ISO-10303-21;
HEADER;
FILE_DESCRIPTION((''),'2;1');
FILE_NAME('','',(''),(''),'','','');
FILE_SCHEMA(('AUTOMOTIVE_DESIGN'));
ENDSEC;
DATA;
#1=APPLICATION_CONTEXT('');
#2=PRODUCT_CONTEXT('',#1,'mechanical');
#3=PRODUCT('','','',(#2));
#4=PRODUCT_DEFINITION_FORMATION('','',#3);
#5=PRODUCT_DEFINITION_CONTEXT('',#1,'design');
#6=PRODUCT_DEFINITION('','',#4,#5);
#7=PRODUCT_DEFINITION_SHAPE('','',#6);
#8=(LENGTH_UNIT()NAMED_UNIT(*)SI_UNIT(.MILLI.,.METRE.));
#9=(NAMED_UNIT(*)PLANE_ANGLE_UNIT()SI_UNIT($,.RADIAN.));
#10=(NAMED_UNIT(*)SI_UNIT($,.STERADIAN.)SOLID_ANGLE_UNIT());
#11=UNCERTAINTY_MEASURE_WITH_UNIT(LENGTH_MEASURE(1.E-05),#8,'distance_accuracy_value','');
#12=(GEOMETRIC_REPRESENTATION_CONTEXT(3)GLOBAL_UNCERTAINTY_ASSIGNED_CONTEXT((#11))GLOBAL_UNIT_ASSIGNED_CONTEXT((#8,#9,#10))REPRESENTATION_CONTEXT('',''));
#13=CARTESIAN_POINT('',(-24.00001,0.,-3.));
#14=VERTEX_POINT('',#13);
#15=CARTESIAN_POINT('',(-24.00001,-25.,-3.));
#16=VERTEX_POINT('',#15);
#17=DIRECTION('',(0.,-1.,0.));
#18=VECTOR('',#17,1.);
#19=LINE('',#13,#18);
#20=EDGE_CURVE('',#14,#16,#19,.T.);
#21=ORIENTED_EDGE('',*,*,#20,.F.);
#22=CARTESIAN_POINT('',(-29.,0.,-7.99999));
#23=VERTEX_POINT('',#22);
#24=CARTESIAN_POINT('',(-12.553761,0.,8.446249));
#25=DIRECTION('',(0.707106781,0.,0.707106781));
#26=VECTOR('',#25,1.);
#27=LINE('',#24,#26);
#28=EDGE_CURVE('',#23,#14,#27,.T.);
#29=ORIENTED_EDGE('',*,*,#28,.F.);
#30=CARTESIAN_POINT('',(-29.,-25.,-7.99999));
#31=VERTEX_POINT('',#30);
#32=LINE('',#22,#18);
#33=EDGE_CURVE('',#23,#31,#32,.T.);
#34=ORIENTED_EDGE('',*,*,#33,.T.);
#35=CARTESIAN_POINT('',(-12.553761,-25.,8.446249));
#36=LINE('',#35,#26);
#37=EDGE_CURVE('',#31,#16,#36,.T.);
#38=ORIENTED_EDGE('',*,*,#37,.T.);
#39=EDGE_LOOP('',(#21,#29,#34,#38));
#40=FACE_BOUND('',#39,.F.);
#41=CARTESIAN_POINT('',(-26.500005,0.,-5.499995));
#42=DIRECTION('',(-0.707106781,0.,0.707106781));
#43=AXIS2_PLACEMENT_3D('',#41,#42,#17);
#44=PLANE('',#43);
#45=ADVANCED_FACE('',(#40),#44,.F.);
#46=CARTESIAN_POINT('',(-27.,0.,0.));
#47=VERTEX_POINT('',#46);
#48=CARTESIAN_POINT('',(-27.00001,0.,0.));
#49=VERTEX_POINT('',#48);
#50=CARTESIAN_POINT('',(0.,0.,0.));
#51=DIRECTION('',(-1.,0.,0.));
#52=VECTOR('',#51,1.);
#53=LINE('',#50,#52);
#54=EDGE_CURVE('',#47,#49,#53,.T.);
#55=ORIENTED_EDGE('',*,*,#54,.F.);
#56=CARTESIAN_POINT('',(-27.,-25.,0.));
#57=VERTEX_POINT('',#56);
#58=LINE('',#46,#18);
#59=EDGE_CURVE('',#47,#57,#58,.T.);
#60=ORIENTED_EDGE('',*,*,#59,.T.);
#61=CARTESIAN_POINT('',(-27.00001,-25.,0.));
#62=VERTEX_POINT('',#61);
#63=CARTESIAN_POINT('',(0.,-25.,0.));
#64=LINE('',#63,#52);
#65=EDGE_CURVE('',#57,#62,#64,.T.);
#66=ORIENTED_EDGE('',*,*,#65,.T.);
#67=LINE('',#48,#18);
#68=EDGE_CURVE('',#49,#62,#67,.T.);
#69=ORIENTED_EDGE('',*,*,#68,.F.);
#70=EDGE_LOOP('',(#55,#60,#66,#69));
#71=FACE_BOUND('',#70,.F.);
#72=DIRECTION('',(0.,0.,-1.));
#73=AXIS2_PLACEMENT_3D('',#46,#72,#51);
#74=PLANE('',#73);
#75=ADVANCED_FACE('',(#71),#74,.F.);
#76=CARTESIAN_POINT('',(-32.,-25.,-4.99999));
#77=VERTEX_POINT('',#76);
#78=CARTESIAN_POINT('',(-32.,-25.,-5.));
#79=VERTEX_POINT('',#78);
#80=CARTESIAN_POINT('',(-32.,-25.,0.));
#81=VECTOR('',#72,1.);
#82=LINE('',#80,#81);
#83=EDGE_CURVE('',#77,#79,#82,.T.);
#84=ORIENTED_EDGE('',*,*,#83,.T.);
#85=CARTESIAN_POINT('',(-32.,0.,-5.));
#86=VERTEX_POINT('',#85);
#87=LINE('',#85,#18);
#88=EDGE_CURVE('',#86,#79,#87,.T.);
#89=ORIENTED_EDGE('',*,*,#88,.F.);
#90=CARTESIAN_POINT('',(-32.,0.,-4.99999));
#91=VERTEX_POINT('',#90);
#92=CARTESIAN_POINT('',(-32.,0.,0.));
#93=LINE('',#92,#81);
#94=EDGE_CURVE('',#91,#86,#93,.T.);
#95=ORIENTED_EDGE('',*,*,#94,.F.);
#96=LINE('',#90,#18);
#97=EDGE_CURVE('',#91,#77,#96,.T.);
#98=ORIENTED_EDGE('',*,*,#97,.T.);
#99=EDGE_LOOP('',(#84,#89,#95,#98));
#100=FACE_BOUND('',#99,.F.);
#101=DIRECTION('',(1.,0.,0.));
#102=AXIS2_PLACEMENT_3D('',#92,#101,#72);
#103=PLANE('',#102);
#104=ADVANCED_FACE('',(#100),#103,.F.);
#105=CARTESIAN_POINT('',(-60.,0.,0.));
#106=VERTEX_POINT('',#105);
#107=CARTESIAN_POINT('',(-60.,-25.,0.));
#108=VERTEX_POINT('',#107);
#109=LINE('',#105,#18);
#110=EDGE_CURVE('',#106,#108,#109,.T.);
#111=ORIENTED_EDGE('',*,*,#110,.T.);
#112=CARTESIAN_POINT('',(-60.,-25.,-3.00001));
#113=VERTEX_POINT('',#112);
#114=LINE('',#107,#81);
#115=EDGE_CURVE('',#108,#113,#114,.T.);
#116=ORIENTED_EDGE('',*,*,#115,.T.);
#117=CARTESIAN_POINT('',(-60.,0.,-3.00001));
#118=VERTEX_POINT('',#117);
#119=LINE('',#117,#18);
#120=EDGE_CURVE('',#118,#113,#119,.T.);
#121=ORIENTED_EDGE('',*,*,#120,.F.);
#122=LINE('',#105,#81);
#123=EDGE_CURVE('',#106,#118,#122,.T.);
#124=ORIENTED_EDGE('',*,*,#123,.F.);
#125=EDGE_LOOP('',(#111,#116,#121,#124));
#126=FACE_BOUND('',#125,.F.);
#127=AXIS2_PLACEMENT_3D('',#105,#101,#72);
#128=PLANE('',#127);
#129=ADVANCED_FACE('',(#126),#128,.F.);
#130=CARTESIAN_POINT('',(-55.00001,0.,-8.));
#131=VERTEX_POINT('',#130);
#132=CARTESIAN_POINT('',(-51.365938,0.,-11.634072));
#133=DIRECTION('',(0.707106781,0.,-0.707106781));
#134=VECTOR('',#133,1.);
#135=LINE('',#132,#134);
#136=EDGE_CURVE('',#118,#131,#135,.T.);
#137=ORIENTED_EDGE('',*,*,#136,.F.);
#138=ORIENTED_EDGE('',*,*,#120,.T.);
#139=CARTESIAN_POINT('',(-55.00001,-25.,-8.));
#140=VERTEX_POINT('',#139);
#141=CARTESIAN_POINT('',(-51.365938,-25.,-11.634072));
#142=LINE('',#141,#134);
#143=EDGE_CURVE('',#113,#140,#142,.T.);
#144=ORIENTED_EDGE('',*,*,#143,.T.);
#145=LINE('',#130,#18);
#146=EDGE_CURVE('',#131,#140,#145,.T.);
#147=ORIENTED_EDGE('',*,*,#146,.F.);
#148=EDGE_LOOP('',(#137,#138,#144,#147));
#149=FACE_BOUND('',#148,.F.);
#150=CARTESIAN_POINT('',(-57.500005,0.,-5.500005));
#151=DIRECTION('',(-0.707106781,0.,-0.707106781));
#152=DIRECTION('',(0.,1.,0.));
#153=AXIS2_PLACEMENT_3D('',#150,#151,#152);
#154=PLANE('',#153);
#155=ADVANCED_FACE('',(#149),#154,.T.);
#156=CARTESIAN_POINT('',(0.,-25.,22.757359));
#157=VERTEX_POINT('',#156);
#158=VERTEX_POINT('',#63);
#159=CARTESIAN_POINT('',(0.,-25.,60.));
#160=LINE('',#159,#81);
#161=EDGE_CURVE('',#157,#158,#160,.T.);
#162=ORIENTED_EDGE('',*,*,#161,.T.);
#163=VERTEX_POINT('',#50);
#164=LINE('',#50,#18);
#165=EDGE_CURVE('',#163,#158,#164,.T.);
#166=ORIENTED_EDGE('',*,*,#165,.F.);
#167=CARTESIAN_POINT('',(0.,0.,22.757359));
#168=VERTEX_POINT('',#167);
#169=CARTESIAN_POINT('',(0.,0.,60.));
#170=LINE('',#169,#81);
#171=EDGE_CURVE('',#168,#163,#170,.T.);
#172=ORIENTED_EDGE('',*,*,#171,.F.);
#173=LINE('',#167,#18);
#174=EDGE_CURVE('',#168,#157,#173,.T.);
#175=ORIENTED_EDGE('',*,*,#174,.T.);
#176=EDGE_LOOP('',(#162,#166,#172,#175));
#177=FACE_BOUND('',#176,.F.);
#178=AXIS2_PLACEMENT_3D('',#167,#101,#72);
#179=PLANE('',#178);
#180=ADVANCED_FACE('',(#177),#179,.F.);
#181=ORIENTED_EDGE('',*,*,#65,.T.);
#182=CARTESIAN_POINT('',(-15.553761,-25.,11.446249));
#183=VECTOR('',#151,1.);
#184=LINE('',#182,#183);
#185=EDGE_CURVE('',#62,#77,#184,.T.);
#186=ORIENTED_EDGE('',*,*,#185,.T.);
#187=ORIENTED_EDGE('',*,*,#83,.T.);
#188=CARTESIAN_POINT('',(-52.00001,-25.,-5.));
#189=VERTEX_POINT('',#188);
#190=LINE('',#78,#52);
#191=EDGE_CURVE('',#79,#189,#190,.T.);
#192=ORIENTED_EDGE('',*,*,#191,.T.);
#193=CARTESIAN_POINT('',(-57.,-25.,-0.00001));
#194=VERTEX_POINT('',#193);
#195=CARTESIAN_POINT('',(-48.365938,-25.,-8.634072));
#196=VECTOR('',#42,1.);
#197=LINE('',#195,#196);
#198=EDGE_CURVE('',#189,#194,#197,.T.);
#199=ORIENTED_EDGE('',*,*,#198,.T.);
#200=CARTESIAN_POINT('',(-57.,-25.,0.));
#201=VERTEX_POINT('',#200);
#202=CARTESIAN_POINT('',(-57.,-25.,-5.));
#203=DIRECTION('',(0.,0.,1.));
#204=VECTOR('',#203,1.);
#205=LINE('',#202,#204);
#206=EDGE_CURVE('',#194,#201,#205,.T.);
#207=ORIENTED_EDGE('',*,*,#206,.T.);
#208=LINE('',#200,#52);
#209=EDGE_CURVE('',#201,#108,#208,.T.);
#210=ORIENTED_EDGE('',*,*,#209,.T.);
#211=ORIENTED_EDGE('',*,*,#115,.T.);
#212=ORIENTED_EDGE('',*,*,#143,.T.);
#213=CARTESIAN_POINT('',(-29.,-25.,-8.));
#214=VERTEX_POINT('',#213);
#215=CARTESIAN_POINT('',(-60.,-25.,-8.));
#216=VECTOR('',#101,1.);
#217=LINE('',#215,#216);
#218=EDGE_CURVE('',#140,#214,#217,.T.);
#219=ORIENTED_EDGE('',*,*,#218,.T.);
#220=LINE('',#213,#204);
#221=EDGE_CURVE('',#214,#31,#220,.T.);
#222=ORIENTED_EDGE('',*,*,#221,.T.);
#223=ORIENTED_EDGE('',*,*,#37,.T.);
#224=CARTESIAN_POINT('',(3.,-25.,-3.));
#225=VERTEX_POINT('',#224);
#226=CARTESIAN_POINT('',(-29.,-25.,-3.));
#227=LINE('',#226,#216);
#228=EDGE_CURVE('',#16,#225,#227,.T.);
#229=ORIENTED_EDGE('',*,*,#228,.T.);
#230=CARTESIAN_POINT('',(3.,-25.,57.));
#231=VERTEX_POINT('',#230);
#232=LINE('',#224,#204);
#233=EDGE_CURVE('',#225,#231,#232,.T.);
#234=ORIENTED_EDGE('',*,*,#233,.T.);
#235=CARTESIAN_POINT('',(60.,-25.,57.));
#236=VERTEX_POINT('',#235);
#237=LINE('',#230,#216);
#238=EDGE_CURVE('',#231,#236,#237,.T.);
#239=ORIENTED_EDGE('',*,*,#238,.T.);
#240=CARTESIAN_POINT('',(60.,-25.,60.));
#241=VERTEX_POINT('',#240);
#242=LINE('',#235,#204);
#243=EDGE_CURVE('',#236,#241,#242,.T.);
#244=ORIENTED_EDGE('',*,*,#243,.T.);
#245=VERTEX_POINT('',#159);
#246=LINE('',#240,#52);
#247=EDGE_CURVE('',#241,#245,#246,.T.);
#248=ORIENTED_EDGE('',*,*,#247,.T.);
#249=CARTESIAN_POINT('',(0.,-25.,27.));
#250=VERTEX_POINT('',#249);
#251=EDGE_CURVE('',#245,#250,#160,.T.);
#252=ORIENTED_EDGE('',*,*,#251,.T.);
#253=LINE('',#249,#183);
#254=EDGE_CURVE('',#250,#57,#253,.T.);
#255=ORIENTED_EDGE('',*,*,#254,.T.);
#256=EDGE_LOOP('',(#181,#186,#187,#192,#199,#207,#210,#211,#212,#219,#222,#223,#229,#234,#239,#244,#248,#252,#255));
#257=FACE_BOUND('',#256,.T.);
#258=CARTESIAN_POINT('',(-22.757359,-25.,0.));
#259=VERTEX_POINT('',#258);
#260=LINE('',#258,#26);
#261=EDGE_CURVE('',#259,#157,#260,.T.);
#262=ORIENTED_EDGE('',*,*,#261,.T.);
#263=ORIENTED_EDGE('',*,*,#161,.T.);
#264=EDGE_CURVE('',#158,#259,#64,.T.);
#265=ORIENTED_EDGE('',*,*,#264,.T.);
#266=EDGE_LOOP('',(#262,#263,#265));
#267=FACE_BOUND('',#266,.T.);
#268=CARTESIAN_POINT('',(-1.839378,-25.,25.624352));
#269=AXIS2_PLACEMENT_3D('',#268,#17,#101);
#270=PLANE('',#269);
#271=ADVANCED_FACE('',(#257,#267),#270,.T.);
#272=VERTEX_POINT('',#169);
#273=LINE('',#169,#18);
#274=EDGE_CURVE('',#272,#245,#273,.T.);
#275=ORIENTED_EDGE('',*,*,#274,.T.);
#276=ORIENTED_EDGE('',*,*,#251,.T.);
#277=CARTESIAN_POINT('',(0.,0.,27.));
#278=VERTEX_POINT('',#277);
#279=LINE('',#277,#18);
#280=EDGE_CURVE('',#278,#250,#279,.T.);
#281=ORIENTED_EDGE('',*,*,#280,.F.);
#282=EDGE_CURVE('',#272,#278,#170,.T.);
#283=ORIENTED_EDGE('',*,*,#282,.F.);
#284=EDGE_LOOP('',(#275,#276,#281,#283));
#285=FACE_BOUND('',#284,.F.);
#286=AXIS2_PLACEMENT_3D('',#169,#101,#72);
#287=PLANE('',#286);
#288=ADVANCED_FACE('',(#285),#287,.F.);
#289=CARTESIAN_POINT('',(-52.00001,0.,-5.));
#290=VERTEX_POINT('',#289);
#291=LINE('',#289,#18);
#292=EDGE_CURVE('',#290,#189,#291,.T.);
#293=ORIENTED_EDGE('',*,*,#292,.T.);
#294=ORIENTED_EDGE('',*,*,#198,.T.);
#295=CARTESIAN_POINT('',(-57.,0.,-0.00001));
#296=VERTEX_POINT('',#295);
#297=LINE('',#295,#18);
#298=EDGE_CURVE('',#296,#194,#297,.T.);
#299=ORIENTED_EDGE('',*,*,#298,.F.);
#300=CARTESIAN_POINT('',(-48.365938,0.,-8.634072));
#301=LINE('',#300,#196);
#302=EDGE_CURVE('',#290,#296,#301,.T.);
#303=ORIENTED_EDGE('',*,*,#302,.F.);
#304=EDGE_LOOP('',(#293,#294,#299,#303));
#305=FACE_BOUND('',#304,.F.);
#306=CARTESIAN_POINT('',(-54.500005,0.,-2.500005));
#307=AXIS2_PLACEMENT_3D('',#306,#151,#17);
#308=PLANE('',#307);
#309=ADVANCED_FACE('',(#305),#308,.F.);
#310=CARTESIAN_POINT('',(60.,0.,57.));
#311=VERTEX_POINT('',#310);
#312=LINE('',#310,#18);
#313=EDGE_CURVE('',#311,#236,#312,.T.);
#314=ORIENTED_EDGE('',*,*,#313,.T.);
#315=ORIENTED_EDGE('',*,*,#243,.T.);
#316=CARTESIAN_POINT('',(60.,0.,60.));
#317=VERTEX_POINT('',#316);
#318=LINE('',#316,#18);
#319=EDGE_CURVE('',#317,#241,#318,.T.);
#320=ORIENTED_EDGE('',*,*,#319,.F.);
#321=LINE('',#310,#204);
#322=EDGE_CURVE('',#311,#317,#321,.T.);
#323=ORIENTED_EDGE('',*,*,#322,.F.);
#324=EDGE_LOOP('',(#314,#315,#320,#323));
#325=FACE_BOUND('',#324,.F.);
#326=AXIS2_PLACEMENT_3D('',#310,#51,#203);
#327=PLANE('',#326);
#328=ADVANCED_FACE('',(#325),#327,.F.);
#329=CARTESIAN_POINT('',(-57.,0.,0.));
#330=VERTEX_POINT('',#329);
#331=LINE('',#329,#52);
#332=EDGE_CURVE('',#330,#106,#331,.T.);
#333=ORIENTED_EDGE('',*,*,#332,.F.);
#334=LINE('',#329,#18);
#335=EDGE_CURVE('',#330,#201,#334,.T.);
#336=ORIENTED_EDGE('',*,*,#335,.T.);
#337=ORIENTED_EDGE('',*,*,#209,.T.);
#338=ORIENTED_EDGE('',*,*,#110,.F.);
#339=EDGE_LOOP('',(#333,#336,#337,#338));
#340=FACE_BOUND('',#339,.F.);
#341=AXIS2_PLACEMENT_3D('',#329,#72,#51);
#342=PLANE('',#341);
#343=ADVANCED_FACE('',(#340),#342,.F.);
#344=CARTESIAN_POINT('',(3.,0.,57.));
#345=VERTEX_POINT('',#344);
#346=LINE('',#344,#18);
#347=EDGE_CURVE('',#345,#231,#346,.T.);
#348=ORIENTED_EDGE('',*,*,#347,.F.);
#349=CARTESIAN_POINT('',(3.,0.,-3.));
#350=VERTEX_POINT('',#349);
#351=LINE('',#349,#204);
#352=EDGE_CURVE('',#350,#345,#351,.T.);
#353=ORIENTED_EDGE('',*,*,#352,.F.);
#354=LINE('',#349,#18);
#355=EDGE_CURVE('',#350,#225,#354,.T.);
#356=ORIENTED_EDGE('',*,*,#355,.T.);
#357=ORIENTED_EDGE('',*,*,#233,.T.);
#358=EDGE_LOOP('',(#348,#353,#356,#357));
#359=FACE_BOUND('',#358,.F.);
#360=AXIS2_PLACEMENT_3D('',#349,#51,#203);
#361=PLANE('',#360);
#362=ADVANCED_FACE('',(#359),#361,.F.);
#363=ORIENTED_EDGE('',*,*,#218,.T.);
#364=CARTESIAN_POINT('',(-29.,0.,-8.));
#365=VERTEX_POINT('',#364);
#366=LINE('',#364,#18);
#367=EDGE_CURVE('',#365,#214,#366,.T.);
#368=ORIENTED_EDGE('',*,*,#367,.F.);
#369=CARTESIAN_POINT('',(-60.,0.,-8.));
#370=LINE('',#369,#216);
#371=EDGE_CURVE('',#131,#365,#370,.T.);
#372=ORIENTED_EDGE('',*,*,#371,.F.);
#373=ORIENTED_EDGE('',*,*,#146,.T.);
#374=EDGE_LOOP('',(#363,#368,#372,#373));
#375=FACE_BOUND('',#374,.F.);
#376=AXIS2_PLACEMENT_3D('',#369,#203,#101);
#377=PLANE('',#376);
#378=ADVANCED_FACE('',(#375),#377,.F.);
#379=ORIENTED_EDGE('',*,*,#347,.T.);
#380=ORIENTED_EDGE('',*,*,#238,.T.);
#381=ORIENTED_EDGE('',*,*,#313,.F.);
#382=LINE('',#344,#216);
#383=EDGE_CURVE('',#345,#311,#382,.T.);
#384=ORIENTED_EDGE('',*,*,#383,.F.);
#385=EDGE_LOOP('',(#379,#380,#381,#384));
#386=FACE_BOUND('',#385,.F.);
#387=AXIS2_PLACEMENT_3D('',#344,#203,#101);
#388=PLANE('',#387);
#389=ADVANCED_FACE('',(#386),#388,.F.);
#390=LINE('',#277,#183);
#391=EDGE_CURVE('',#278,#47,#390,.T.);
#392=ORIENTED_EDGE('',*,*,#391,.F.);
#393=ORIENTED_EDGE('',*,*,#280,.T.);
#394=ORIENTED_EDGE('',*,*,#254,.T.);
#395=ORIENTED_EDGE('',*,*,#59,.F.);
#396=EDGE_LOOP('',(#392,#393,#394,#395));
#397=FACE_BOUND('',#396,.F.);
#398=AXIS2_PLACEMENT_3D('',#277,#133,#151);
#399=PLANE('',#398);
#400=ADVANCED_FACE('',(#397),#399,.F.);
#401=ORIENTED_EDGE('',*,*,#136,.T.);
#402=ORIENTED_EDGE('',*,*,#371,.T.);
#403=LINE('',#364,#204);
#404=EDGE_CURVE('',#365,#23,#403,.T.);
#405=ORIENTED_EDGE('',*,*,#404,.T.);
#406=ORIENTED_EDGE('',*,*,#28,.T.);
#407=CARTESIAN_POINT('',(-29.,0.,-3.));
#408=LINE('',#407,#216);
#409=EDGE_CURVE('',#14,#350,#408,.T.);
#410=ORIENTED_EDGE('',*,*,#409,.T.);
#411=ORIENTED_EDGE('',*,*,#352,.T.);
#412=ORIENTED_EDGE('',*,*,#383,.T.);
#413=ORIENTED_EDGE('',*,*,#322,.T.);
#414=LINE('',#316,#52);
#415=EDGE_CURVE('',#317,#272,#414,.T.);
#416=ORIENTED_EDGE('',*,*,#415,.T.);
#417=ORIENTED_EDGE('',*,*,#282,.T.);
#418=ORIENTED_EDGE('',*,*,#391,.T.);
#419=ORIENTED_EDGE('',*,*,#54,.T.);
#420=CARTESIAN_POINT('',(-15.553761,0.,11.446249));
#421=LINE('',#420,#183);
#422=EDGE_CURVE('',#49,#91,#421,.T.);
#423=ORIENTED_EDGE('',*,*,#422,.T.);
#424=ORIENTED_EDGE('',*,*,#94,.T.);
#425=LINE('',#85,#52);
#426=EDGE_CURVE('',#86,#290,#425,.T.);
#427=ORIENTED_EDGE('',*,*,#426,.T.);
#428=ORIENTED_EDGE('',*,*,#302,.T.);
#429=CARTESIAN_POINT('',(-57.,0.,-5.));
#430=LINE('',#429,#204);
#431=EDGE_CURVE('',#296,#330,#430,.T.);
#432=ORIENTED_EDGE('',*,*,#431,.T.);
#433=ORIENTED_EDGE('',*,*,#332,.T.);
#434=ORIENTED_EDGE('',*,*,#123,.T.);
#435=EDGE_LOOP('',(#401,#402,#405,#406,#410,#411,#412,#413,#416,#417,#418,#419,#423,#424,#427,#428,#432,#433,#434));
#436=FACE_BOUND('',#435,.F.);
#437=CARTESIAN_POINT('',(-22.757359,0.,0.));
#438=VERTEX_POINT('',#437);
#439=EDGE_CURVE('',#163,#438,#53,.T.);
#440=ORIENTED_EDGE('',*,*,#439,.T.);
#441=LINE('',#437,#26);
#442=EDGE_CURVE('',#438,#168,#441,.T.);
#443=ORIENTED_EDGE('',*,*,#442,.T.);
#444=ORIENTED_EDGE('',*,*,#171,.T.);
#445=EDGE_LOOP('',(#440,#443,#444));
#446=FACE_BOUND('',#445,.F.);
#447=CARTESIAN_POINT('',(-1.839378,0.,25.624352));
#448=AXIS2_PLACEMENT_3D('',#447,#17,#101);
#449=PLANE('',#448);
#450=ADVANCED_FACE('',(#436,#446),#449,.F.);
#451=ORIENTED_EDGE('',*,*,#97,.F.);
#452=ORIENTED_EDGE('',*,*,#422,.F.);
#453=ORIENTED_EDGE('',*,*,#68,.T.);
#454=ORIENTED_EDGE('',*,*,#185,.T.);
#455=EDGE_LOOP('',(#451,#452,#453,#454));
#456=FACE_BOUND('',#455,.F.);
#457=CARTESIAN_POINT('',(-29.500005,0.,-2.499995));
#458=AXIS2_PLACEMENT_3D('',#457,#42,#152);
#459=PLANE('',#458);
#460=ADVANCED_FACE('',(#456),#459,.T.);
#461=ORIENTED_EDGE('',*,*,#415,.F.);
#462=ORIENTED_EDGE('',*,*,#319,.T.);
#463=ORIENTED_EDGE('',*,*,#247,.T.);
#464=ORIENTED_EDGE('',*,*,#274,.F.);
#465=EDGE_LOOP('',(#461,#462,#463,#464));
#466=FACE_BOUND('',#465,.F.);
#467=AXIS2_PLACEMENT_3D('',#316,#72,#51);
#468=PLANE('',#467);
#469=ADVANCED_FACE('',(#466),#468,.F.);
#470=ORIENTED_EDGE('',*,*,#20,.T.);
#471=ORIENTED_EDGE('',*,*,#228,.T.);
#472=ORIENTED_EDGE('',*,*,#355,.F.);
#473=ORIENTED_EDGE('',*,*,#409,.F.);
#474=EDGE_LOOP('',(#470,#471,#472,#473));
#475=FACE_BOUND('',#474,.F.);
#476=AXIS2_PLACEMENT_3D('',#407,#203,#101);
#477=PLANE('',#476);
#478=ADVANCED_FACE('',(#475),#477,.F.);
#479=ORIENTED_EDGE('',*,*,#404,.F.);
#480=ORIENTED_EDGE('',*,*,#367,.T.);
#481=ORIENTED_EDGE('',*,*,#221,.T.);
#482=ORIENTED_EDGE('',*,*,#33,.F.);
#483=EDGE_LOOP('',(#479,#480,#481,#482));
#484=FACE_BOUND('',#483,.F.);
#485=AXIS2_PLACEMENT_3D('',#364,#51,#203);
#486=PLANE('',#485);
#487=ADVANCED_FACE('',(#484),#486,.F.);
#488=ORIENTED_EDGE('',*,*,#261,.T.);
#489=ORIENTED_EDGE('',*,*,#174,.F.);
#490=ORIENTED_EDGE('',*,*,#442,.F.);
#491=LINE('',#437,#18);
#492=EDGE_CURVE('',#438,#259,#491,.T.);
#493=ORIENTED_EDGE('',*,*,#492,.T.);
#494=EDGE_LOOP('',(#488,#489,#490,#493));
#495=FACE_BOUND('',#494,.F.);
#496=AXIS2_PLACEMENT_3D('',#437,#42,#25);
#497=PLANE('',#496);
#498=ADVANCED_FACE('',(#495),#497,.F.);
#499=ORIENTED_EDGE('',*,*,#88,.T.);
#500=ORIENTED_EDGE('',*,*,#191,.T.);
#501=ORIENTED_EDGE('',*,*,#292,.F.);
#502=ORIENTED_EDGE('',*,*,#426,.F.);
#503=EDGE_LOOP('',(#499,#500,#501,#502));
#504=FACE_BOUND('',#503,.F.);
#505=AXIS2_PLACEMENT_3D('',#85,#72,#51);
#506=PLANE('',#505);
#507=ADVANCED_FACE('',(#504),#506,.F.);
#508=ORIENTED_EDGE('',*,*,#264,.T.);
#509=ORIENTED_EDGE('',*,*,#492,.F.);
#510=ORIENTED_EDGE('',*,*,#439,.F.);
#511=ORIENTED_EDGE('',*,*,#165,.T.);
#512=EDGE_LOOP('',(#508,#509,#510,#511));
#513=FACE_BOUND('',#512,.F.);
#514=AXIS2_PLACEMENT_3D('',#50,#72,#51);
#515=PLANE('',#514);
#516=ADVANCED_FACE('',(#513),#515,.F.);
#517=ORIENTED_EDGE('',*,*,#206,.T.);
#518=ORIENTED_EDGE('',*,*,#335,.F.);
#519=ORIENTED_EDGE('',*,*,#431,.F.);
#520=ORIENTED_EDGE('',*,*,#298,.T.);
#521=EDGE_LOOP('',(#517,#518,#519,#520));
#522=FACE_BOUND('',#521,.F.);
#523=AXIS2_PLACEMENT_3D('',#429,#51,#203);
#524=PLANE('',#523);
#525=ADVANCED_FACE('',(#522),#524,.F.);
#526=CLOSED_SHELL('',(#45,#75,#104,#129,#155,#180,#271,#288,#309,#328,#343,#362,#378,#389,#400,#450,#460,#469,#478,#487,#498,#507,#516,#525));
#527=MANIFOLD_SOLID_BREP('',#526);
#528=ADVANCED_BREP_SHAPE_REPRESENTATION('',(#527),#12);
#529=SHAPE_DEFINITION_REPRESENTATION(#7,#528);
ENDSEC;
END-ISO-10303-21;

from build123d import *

# Parameters (mm, degrees)
F1_DEPTH = 25
F2_SIZE  = 4.99999


# Not quite as in the source:
# - a fillet or chamfer is up to 0.001 mm smaller than in the source, because OpenCascade refuses the exact size


with BuildPart() as f1:
    # F0 (on Front) → F1 (new body)
    with BuildSketch(Plane.XZ):
        Polygon((0, 22.7573593129), (0, 0), (-22.7573593129, 0), (-27, 0), (-32, 0), (-32, -5), (-57, -5), (-57, 0), (-60, 0), (-60, -8), (-29, -8), (-29, -3), (0, -3), (3, -3), (3, 57), (60, 57), (60, 60), (0, 60), (0, 27), align=None)
        Polygon((-22.7573593129, 0), (0, 22.7573593129), (0, 27), (-27, 0), align=None)
    extrude(amount=F1_DEPTH)

    # F2 (size 5 in the source; OpenCascade refuses exactly that, so slightly less here)
    f2_edges = [f1.edges().sort_by_distance(p)[0] for p in [
        (-57, -12.5, -5),
        (-60, -12.5, -8),
        (-29, -12.5, -3),
        (-32, -12.5, 0),
    ]]
    chamfer(f2_edges, length=F2_SIZE)


solid = f1.part
